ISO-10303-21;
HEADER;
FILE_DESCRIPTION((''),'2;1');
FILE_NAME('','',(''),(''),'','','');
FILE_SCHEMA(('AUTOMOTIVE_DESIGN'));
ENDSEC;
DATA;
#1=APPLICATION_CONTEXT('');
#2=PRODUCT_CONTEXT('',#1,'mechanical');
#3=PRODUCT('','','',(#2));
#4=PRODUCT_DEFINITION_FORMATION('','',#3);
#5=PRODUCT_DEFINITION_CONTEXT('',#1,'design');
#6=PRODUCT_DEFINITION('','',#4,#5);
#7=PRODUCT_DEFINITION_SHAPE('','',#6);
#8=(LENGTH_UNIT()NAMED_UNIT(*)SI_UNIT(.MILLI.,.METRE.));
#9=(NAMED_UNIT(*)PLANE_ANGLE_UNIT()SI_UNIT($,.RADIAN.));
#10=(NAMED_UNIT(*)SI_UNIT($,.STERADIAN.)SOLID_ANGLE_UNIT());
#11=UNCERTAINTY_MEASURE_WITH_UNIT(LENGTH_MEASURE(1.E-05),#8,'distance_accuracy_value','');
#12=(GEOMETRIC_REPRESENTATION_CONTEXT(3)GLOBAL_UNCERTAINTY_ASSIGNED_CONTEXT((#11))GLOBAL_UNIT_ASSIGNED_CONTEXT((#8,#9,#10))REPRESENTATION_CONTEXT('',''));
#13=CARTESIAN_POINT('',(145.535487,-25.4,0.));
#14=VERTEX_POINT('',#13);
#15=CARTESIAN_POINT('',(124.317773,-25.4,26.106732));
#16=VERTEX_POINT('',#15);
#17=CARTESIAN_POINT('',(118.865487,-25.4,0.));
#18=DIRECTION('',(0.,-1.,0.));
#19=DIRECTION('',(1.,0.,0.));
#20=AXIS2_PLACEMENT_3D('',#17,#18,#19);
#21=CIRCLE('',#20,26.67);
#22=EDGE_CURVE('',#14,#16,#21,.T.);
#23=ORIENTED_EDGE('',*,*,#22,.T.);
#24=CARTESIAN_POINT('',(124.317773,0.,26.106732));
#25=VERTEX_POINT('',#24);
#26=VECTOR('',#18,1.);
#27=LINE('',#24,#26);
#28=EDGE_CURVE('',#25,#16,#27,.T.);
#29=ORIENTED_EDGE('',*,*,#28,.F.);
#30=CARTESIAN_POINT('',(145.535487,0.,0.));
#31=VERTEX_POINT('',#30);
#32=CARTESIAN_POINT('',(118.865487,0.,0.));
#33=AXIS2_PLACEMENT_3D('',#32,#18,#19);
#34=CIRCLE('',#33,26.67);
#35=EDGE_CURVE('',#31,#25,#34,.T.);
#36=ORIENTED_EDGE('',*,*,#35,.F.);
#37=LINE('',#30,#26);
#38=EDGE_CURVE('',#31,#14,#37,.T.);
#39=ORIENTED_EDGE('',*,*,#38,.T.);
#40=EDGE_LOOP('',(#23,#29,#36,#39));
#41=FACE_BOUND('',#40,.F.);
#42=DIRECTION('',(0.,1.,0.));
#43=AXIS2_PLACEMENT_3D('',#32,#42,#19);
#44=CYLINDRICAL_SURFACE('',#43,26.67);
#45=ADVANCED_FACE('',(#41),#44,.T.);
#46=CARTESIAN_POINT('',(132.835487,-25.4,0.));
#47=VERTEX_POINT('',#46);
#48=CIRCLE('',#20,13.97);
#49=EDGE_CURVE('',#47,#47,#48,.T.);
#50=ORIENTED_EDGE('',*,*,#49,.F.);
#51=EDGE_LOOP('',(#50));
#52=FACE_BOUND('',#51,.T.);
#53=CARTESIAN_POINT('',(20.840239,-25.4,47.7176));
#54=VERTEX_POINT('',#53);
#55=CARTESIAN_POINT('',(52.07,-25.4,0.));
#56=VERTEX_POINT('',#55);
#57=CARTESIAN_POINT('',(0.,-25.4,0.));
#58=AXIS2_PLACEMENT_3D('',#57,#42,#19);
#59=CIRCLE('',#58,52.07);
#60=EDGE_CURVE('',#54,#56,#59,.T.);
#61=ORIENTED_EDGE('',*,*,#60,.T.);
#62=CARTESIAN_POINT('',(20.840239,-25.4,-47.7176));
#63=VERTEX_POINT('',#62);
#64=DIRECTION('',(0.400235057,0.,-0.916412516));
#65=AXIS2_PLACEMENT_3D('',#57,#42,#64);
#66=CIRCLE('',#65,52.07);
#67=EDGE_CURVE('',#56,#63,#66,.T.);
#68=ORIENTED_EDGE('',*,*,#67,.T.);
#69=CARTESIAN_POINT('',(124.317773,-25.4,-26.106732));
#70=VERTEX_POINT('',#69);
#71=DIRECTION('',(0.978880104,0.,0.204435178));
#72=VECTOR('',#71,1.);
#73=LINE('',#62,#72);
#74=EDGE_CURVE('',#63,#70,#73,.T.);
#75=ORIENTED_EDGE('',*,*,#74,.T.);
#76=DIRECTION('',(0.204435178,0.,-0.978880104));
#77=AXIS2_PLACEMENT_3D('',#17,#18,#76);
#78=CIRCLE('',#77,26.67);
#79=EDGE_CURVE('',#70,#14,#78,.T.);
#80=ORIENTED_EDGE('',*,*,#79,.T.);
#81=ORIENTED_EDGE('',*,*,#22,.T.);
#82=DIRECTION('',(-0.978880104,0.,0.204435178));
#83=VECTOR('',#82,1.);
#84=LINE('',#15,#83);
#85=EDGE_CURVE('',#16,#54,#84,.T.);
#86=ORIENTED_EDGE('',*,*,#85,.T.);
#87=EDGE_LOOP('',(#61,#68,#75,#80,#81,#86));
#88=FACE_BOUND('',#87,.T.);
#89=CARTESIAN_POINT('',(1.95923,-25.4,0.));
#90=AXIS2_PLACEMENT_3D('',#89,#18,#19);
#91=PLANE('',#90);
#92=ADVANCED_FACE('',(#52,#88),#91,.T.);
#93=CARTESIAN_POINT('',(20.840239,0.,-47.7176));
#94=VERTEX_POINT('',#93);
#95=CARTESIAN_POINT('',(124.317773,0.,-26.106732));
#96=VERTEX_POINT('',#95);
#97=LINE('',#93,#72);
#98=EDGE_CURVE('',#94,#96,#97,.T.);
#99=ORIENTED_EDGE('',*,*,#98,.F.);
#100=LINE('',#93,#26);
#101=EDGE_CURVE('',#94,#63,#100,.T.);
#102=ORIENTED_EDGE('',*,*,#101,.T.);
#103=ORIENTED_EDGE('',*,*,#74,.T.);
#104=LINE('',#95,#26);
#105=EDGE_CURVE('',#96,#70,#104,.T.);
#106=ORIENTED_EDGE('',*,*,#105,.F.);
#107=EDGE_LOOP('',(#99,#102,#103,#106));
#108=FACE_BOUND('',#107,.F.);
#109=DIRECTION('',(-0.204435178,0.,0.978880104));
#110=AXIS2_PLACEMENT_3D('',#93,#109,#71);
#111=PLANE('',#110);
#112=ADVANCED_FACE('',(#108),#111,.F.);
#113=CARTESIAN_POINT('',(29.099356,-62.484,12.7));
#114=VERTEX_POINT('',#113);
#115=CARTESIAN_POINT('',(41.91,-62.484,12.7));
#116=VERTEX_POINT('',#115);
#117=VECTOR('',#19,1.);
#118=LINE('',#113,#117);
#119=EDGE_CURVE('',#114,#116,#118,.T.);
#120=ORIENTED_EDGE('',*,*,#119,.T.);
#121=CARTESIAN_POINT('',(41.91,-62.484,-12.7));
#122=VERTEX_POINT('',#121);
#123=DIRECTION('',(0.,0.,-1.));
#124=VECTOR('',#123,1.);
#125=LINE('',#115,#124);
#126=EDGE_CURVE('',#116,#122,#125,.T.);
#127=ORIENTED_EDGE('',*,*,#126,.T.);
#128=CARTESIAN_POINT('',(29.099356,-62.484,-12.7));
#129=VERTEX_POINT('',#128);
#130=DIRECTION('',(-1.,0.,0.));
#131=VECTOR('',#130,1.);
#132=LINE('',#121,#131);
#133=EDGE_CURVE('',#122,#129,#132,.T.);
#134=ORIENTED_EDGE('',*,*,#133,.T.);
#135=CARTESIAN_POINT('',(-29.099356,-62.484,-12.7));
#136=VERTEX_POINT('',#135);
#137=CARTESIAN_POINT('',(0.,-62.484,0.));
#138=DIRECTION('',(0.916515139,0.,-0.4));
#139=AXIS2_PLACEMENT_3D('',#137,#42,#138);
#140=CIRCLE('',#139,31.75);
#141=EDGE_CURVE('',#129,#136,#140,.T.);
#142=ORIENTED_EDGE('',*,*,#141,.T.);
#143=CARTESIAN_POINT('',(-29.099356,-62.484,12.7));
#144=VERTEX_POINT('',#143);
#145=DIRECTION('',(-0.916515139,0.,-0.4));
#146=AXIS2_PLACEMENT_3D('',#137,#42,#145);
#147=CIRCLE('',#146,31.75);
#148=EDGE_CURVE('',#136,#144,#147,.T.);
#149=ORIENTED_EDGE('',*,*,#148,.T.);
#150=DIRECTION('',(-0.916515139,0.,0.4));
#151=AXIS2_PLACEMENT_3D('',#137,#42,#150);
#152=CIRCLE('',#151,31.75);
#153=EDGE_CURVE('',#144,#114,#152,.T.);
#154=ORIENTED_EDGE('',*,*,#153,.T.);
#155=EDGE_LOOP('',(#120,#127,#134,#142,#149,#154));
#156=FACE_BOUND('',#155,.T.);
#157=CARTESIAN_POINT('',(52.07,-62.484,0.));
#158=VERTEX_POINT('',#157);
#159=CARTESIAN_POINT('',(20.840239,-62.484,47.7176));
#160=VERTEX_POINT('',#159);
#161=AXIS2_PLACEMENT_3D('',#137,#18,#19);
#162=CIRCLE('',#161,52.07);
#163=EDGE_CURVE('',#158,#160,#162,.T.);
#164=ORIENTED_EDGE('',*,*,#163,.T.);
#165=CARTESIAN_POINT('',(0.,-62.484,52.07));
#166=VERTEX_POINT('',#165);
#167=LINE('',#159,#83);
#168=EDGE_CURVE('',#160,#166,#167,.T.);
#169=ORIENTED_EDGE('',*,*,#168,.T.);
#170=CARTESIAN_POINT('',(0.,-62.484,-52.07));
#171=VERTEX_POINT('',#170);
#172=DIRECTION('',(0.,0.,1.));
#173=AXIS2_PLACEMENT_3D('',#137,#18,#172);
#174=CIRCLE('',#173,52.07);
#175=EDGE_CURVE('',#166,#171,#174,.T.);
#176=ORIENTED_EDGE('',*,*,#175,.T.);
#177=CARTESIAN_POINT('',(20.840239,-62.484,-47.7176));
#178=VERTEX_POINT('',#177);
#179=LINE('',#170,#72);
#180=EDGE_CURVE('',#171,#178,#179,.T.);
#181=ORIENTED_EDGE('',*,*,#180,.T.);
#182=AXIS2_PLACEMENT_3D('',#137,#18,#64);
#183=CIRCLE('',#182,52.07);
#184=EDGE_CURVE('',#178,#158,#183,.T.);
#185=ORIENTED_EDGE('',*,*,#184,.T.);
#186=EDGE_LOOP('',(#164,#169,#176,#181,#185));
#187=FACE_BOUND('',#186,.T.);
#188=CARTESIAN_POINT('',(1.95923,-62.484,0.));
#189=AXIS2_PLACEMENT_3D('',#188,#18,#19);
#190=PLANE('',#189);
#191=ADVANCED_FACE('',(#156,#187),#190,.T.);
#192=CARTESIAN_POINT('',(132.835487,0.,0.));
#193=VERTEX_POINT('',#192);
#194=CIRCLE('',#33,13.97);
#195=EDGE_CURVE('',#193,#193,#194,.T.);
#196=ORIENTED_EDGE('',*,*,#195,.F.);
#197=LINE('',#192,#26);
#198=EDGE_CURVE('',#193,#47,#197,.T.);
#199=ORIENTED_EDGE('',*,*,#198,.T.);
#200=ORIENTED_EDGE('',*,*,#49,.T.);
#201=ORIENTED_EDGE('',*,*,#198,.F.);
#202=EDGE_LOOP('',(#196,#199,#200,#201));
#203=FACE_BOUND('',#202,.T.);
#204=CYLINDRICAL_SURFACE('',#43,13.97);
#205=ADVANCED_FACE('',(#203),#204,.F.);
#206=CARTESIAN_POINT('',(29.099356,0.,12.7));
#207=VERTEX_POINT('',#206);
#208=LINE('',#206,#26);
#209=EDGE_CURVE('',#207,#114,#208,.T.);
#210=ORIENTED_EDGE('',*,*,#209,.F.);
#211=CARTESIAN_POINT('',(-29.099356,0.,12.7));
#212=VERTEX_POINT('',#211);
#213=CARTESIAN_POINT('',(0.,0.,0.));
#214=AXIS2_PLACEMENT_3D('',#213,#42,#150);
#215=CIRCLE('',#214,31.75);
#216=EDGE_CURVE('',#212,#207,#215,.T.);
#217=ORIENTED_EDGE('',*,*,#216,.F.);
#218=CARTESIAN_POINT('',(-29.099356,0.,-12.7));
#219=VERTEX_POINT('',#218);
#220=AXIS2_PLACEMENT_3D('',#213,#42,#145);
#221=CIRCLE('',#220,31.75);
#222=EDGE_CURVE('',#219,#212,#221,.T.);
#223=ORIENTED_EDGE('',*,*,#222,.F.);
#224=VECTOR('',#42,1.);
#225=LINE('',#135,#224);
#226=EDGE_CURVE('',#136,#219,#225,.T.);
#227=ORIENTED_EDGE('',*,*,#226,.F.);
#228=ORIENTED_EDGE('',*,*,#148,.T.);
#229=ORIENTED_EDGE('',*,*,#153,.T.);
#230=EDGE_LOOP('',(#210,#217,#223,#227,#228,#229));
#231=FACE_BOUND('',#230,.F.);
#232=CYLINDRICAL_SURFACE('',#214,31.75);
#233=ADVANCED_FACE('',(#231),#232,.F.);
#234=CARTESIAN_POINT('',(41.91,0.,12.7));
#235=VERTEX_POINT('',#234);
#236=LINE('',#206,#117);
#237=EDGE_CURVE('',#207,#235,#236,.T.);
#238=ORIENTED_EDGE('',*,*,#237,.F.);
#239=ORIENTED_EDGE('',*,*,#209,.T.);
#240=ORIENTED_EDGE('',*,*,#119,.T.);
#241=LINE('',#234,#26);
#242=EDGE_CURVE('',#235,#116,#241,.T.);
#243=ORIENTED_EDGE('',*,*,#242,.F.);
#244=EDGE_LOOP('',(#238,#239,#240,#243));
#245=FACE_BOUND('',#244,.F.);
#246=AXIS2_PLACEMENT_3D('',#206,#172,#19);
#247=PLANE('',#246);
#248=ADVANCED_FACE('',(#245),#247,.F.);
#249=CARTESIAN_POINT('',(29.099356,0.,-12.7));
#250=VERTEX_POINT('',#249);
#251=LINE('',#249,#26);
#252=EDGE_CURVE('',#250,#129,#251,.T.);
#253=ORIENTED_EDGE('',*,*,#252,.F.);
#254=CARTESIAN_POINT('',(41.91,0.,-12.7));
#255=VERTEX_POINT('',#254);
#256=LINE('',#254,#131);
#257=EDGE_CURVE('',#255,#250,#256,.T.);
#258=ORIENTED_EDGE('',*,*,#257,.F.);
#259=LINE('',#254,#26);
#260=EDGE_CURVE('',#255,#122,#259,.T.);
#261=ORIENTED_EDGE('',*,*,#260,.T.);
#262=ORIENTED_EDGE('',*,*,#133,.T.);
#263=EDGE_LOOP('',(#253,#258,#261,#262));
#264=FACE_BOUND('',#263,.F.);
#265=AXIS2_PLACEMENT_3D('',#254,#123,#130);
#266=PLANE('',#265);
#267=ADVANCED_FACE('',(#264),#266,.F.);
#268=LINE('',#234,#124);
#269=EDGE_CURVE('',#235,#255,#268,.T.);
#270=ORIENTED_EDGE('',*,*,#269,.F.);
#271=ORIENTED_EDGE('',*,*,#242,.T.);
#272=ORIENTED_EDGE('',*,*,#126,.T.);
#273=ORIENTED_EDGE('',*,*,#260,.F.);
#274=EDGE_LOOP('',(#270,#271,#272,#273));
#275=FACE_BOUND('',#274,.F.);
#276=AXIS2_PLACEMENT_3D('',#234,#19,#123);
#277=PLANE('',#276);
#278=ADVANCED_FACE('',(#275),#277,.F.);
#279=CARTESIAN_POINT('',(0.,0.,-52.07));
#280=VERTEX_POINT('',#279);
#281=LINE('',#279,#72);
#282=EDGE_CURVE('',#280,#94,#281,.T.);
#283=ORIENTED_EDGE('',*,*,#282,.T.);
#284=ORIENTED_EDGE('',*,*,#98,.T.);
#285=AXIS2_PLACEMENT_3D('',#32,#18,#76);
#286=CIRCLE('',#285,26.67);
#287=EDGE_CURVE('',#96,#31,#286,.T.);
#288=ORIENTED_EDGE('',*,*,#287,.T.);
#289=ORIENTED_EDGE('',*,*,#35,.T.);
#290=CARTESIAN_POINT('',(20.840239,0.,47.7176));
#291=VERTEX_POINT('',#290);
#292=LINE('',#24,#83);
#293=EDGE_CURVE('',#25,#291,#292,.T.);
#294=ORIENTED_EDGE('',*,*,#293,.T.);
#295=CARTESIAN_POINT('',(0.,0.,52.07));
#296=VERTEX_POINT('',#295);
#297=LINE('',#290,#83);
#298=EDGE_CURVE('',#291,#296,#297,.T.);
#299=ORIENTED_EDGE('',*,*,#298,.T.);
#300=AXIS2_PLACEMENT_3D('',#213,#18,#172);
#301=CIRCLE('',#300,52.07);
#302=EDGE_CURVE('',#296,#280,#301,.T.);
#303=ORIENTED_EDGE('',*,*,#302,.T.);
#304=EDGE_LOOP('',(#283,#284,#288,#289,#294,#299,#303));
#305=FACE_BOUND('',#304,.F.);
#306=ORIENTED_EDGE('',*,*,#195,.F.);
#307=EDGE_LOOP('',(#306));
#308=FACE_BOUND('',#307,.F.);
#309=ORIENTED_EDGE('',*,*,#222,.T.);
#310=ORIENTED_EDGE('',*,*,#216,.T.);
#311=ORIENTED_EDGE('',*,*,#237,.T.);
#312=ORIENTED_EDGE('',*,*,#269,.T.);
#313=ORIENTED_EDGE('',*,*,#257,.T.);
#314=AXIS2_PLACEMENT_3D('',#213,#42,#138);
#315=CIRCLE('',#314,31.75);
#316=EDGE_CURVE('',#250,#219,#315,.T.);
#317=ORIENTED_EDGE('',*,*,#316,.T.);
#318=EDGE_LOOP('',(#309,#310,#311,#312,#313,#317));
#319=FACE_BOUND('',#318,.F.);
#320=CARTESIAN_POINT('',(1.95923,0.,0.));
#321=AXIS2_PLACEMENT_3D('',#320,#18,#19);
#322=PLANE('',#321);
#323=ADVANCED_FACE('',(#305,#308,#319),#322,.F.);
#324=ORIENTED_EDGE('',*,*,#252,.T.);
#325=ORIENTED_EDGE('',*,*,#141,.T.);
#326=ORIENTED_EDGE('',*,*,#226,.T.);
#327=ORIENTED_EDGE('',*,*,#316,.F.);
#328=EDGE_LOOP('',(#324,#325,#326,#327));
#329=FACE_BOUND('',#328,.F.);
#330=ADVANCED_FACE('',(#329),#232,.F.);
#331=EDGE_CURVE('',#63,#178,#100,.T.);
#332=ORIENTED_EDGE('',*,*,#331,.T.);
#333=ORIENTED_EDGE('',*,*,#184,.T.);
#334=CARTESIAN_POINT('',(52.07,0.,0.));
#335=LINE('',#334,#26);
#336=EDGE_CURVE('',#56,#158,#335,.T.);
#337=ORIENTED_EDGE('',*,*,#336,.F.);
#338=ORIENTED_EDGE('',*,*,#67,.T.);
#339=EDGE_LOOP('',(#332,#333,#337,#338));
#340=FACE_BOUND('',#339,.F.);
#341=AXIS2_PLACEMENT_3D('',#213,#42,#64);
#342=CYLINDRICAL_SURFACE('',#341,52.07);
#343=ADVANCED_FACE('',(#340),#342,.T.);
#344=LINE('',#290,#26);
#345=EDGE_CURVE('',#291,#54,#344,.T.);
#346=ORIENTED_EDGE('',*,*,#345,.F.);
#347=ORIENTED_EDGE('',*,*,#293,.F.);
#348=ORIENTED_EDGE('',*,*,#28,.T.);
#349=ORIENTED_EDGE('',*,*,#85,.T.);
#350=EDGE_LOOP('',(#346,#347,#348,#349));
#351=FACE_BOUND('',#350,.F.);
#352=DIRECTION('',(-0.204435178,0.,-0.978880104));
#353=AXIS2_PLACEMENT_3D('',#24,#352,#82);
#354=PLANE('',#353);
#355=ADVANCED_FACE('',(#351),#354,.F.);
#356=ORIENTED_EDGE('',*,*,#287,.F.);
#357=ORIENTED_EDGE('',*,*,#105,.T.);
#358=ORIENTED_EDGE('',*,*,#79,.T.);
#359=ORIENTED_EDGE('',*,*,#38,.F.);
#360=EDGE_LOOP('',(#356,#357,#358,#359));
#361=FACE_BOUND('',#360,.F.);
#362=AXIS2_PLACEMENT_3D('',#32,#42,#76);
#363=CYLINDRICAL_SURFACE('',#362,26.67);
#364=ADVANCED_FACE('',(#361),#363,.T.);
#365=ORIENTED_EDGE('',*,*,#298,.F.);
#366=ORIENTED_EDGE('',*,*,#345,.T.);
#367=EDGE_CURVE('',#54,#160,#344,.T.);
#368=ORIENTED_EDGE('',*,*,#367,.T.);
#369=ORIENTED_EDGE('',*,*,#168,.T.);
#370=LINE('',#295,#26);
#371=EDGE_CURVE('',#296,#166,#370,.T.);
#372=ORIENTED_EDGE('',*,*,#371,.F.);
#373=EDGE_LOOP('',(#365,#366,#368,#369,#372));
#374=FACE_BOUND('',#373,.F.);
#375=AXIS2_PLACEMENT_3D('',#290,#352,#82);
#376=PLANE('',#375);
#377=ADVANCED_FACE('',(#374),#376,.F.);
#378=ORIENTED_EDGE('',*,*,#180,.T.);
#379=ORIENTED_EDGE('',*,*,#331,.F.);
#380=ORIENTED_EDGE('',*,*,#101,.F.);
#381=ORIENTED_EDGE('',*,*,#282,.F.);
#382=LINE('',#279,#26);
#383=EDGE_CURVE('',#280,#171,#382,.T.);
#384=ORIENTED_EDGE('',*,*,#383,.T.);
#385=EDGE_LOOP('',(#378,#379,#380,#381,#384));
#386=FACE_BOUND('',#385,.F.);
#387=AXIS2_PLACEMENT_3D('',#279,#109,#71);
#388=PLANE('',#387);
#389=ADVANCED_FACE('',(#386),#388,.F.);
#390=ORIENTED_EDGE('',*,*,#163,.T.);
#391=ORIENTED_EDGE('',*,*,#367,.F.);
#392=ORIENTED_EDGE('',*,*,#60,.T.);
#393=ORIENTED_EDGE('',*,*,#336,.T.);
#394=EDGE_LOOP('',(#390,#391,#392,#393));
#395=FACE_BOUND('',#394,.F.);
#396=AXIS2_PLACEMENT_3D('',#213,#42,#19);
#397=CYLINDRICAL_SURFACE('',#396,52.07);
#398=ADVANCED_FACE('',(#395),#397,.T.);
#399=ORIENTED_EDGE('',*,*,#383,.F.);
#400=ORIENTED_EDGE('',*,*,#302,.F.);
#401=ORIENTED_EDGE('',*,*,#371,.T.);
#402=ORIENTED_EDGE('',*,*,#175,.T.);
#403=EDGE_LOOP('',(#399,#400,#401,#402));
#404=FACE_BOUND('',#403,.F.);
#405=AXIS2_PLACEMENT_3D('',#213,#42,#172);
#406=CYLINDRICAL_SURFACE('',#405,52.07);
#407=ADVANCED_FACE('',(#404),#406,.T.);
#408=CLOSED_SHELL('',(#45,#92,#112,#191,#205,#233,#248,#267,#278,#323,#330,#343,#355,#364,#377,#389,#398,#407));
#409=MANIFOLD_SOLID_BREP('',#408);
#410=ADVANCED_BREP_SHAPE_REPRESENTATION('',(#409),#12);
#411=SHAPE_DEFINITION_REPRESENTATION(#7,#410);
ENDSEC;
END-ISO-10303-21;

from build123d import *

# Parameters (mm, degrees)
F0_R     = 13.97
F1_DEPTH = 25.4
F2_DEPTH = 62.484


with BuildPart() as f1:
    # F0 (on Front) → F1 (new body)
    with BuildSketch(Plane.XZ):
        with BuildLine():
            Line((20.8402394137, 47.7175997005), (0, 52.07))
            ThreePointArc((0, 52.07), (-52.07, 0), (0, -52.07))
            Line((0, -52.07), (20.8402394137, -47.7175997005))
            ThreePointArc((20.8402394137, -47.7175997005), (43.5685446525, -28.5143265196), (52.07, 0))
            ThreePointArc((52.07, 0), (43.5685446525, 28.5143265196), (20.8402394137, 47.7175997005))
        make_face()
        with BuildLine():
            ThreePointArc((-29.099355663, 12.7), (0, 31.75), (29.099355663, 12.7))
            Line((29.099355663, 12.7), (41.91, 12.7))
            Line((41.91, 12.7), (41.91, -12.7))
            Line((41.91, -12.7), (29.099355663, -12.7))
            ThreePointArc((29.099355663, -12.7), (0, -31.75), (-29.099355663, -12.7))
            Line((-29.099355663, -12.7), (-41.91, -12.7))
            Line((-41.91, -12.7), (-41.91, 12.7))
            Line((-41.91, 12.7), (-29.099355663, 12.7))
        make_face(mode=Mode.SUBTRACT)
        with BuildLine():
            Line((124.3177732028, 26.1067323726), (20.8402394137, 47.7175997005))
            ThreePointArc((20.8402394137, 47.7175997005), (43.5685446525, 28.5143265196), (52.07, 0))
            ThreePointArc((52.07, 0), (43.5685446525, -28.5143265196), (20.8402394137, -47.7175997005))
            Line((20.8402394137, -47.7175997005), (124.3177732028, -26.1067323726))
            ThreePointArc((124.3177732028, -26.1067323726), (92.1954870011, 0), (124.3177732028, 26.1067323726))
        make_face()
        with BuildLine():
            ThreePointArc((145.5354870011, 0), (139.5621216671, 16.8207673279), (124.3177732028, 26.1067323726))
            ThreePointArc((124.3177732028, 26.1067323726), (92.1954870011, 0), (124.3177732028, -26.1067323726))
            ThreePointArc((124.3177732028, -26.1067323726), (139.5621216671, -16.8207673279), (145.5354870011, 0))
        make_face()
        with Locations((118.8654870011, 0)):
            Circle(F0_R, mode=Mode.SUBTRACT)
        with BuildLine():
            ThreePointArc((-29.099355663, -12.7), (-31.75, 0), (-29.099355663, 12.7))
            Line((-29.099355663, 12.7), (-41.91, 12.7))
            Line((-41.91, 12.7), (-41.91, -12.7))
            Line((-41.91, -12.7), (-29.099355663, -12.7))
        make_face()
    extrude(amount=F1_DEPTH)

    # F0 (on Front) → F2 (join)
    with BuildSketch(Plane.XZ):
        with BuildLine():
            Line((20.8402394137, 47.7175997005), (0, 52.07))
            ThreePointArc((0, 52.07), (-52.07, 0), (0, -52.07))
            Line((0, -52.07), (20.8402394137, -47.7175997005))
            ThreePointArc((20.8402394137, -47.7175997005), (43.5685446525, -28.5143265196), (52.07, 0))
            ThreePointArc((52.07, 0), (43.5685446525, 28.5143265196), (20.8402394137, 47.7175997005))
        make_face()
        with BuildLine():
            ThreePointArc((-29.099355663, 12.7), (0, 31.75), (29.099355663, 12.7))
            Line((29.099355663, 12.7), (41.91, 12.7))
            Line((41.91, 12.7), (41.91, -12.7))
            Line((41.91, -12.7), (29.099355663, -12.7))
            ThreePointArc((29.099355663, -12.7), (0, -31.75), (-29.099355663, -12.7))
            Line((-29.099355663, -12.7), (-41.91, -12.7))
            Line((-41.91, -12.7), (-41.91, 12.7))
            Line((-41.91, 12.7), (-29.099355663, 12.7))
        make_face(mode=Mode.SUBTRACT)
        with BuildLine():
            ThreePointArc((-29.099355663, -12.7), (-31.75, 0), (-29.099355663, 12.7))
            Line((-29.099355663, 12.7), (-41.91, 12.7))
            Line((-41.91, 12.7), (-41.91, -12.7))
            Line((-41.91, -12.7), (-29.099355663, -12.7))
        make_face()
    extrude(amount=F2_DEPTH)


solid = f1.part
